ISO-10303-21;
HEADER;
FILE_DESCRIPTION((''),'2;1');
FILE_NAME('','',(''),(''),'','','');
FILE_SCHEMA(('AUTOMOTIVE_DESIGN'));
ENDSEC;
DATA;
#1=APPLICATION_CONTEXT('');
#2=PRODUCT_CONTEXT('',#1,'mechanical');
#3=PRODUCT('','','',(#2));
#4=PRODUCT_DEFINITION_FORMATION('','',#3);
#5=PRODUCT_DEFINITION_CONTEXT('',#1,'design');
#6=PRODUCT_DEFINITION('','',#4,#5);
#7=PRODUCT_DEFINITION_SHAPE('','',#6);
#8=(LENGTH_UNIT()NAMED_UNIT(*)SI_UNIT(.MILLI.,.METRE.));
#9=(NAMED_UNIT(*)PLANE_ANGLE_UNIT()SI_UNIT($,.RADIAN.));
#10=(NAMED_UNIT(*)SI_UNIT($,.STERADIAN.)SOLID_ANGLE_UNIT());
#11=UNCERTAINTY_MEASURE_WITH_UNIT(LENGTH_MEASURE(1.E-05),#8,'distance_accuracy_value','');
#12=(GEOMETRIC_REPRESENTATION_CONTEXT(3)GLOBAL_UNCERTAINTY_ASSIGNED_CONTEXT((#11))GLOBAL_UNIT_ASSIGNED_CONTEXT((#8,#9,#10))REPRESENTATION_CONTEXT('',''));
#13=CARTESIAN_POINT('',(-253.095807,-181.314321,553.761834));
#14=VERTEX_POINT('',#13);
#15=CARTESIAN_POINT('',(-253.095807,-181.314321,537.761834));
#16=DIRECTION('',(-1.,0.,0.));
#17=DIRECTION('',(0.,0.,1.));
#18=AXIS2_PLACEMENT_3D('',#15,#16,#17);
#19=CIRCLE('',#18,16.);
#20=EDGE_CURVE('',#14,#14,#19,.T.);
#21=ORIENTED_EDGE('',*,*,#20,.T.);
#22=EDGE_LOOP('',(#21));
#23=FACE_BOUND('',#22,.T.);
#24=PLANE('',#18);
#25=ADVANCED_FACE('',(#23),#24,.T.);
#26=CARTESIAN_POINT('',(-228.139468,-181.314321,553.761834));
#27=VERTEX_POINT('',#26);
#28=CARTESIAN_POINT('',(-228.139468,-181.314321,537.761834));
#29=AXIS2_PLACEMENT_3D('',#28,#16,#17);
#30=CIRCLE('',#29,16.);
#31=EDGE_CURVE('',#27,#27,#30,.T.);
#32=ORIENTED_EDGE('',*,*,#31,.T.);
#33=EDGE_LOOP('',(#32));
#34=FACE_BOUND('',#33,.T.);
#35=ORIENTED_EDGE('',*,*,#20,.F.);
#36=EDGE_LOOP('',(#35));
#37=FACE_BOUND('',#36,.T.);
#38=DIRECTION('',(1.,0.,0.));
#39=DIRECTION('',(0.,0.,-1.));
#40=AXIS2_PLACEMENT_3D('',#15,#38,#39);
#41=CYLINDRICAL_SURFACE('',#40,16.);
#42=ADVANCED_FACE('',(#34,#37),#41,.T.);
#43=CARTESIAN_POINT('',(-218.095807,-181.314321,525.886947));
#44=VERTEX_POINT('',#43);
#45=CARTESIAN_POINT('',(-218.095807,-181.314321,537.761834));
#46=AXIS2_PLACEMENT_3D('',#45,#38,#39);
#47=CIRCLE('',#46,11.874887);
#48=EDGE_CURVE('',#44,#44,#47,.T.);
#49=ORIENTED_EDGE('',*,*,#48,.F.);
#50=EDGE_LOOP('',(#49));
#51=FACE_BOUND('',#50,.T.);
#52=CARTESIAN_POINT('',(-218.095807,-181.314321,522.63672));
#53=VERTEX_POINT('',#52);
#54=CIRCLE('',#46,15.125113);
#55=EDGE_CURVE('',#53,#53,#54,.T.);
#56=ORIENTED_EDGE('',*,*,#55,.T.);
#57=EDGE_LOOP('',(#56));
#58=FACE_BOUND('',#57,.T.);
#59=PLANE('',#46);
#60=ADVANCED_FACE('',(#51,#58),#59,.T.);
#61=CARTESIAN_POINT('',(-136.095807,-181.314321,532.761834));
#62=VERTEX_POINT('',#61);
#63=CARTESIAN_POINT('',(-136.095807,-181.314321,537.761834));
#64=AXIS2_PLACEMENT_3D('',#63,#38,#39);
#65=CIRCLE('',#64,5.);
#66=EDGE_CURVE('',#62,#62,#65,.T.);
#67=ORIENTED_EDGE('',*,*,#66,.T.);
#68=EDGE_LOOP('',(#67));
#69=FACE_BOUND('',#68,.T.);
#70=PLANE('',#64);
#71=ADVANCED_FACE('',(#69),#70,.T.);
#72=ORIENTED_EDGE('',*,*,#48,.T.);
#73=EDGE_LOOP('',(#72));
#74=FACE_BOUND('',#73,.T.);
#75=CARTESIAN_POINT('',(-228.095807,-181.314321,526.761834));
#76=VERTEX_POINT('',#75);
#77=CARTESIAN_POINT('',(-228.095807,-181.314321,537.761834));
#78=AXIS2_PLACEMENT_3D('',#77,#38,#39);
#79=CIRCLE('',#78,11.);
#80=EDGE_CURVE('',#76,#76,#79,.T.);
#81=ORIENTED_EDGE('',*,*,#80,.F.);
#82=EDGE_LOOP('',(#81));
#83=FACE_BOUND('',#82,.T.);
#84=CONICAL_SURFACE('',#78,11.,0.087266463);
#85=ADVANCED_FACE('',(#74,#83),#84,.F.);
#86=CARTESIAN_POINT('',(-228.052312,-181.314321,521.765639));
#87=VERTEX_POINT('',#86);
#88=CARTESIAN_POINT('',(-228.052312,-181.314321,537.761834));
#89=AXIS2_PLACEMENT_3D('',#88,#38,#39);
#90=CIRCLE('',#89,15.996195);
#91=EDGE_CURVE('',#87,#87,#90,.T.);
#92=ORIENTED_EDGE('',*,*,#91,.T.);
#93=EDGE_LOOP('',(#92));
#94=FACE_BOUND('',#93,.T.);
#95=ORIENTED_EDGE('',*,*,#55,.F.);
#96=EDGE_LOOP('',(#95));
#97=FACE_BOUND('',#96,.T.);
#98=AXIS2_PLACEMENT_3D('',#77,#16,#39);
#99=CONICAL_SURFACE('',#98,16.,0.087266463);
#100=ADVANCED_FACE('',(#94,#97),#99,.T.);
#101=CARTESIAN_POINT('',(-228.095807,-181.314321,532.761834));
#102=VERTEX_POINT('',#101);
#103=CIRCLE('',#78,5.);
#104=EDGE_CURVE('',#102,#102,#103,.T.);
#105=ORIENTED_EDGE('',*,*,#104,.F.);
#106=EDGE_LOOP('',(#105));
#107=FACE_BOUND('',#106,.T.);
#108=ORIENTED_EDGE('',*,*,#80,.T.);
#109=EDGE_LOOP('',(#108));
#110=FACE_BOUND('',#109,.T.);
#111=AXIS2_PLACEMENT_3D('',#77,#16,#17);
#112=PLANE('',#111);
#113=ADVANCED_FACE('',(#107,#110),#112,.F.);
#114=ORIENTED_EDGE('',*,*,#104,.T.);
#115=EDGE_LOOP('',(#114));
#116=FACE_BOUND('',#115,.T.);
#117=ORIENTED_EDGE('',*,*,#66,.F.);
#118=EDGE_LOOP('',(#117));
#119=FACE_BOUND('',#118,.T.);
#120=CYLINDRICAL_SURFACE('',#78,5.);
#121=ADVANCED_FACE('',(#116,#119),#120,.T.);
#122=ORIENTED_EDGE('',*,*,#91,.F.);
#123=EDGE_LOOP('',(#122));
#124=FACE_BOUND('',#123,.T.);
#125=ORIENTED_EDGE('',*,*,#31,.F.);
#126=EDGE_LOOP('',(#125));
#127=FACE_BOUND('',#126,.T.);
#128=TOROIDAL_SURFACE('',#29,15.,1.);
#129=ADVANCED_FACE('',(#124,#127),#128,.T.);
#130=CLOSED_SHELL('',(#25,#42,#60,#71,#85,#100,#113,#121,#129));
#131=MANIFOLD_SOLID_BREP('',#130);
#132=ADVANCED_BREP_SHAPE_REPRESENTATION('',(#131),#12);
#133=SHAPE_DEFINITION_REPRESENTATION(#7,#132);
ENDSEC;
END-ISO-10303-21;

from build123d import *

# Parameters (mm, degrees)
SKETCH_2_R      = 5
EXTRUDE_1_DEPTH = 92
SKETCH_3_R      = 16
EXTRUDE_2_DEPTH = 25
SKETCH_4_R      = 16
SKETCH_4_R_2    = 11
EXTRUDE_3_DEPTH = 10
EXTRUDE_3_DRAFT = 5
FILLET_1_R      = 1


with BuildPart() as part:
    # 草图2 → 凸台-拉伸1 (new body)
    with BuildSketch(Plane(origin=(-136.095806698, 0, 0), x_dir=(0, 0, -1), z_dir=(1, 0, 0))):
        with Locations((-537.761833513, -181.314321461)):
            Circle(SKETCH_2_R)
    extrude(amount=-EXTRUDE_1_DEPTH)

    # 草图3 → 凸台-拉伸2 (add)
    with BuildSketch(Plane.ZY.offset(228.095806698)):
        with Locations((537.761833513, -181.314321461)):
            Circle(SKETCH_3_R)
    extrude(amount=EXTRUDE_2_DEPTH)


with BuildPart() as extrude_3_tool:
    # 草图4 → 凸台-拉伸3 (with draft: the straight prism first)
    with BuildSketch(Plane(origin=(-228.095806698, 0, 0), x_dir=(0, 0, -1), z_dir=(1, 0, 0))):
        with Locations((-537.761833513, -181.314321461)):
            Circle(SKETCH_4_R)
        with Locations((-537.761833513, -181.314321461)):
            Circle(SKETCH_4_R_2, mode=Mode.SUBTRACT)
    extrude(amount=EXTRUDE_3_DEPTH)
    # 凸台-拉伸3: the draft: its side faces are tilted about the plane it starts from
    extrude_3_sides = [extrude_3_tool.faces().sort_by_distance(p)[0] for p in [
        (-223.095806698, -181.314321461, 553.761833513),
        (-223.095806698, -181.314321461, 548.761833513),
    ]]
    draft(extrude_3_sides, Plane(origin=(-228.095806698, 0, 0), x_dir=(0, 0, -1), z_dir=(1, 0, 0)), EXTRUDE_3_DRAFT)


with BuildPart() as part_1:
    add(part.part)

    # 凸台-拉伸3: add extrude_3_tool
    add(extrude_3_tool.part)

    # 圆角1
    # the kernel refuses this fillet: 1 mm, written as the material it takes off along each edge
    with BuildSketch(Plane(origin=(-228.095806698, -181.314321461, 537.761833513), x_dir=(0, 0, 1), z_dir=(0, -1, 0))) as fillet_1_piece_1:
        with BuildLine():
            CenterArc((16 - FILLET_1_R, FILLET_1_R * 0.0436609429085), FILLET_1_R, 355, 5)
            Line((16 - FILLET_1_R * 0.0038053019083, -FILLET_1_R * 0.0434947998392), (16, 0))
            Line((16, 0), (16, FILLET_1_R * 0.0436609429085))
        make_face()
    revolve(axis=Axis((-228.095806698, -181.314321461, 537.761833513), (-1, 0, 0)), revolution_arc=180, mode=Mode.SUBTRACT)
    with BuildSketch(Plane(origin=(-228.095806698, -181.314321461, 537.761833513), x_dir=(0, 0, -1), z_dir=(0, 1, 0))) as fillet_1_piece_2:
        with BuildLine():
            CenterArc((16 - FILLET_1_R, FILLET_1_R * 0.0436609429085), FILLET_1_R, 355, 5)
            Line((16 - FILLET_1_R * 0.0038053019083, -FILLET_1_R * 0.0434947998392), (16, 0))
            Line((16, 0), (16, FILLET_1_R * 0.0436609429085))
        make_face()
    revolve(axis=Axis((-228.095806698, -181.314321461, 537.761833513), (-1, 0, 0)), revolution_arc=180, mode=Mode.SUBTRACT)


solid = part_1.part
